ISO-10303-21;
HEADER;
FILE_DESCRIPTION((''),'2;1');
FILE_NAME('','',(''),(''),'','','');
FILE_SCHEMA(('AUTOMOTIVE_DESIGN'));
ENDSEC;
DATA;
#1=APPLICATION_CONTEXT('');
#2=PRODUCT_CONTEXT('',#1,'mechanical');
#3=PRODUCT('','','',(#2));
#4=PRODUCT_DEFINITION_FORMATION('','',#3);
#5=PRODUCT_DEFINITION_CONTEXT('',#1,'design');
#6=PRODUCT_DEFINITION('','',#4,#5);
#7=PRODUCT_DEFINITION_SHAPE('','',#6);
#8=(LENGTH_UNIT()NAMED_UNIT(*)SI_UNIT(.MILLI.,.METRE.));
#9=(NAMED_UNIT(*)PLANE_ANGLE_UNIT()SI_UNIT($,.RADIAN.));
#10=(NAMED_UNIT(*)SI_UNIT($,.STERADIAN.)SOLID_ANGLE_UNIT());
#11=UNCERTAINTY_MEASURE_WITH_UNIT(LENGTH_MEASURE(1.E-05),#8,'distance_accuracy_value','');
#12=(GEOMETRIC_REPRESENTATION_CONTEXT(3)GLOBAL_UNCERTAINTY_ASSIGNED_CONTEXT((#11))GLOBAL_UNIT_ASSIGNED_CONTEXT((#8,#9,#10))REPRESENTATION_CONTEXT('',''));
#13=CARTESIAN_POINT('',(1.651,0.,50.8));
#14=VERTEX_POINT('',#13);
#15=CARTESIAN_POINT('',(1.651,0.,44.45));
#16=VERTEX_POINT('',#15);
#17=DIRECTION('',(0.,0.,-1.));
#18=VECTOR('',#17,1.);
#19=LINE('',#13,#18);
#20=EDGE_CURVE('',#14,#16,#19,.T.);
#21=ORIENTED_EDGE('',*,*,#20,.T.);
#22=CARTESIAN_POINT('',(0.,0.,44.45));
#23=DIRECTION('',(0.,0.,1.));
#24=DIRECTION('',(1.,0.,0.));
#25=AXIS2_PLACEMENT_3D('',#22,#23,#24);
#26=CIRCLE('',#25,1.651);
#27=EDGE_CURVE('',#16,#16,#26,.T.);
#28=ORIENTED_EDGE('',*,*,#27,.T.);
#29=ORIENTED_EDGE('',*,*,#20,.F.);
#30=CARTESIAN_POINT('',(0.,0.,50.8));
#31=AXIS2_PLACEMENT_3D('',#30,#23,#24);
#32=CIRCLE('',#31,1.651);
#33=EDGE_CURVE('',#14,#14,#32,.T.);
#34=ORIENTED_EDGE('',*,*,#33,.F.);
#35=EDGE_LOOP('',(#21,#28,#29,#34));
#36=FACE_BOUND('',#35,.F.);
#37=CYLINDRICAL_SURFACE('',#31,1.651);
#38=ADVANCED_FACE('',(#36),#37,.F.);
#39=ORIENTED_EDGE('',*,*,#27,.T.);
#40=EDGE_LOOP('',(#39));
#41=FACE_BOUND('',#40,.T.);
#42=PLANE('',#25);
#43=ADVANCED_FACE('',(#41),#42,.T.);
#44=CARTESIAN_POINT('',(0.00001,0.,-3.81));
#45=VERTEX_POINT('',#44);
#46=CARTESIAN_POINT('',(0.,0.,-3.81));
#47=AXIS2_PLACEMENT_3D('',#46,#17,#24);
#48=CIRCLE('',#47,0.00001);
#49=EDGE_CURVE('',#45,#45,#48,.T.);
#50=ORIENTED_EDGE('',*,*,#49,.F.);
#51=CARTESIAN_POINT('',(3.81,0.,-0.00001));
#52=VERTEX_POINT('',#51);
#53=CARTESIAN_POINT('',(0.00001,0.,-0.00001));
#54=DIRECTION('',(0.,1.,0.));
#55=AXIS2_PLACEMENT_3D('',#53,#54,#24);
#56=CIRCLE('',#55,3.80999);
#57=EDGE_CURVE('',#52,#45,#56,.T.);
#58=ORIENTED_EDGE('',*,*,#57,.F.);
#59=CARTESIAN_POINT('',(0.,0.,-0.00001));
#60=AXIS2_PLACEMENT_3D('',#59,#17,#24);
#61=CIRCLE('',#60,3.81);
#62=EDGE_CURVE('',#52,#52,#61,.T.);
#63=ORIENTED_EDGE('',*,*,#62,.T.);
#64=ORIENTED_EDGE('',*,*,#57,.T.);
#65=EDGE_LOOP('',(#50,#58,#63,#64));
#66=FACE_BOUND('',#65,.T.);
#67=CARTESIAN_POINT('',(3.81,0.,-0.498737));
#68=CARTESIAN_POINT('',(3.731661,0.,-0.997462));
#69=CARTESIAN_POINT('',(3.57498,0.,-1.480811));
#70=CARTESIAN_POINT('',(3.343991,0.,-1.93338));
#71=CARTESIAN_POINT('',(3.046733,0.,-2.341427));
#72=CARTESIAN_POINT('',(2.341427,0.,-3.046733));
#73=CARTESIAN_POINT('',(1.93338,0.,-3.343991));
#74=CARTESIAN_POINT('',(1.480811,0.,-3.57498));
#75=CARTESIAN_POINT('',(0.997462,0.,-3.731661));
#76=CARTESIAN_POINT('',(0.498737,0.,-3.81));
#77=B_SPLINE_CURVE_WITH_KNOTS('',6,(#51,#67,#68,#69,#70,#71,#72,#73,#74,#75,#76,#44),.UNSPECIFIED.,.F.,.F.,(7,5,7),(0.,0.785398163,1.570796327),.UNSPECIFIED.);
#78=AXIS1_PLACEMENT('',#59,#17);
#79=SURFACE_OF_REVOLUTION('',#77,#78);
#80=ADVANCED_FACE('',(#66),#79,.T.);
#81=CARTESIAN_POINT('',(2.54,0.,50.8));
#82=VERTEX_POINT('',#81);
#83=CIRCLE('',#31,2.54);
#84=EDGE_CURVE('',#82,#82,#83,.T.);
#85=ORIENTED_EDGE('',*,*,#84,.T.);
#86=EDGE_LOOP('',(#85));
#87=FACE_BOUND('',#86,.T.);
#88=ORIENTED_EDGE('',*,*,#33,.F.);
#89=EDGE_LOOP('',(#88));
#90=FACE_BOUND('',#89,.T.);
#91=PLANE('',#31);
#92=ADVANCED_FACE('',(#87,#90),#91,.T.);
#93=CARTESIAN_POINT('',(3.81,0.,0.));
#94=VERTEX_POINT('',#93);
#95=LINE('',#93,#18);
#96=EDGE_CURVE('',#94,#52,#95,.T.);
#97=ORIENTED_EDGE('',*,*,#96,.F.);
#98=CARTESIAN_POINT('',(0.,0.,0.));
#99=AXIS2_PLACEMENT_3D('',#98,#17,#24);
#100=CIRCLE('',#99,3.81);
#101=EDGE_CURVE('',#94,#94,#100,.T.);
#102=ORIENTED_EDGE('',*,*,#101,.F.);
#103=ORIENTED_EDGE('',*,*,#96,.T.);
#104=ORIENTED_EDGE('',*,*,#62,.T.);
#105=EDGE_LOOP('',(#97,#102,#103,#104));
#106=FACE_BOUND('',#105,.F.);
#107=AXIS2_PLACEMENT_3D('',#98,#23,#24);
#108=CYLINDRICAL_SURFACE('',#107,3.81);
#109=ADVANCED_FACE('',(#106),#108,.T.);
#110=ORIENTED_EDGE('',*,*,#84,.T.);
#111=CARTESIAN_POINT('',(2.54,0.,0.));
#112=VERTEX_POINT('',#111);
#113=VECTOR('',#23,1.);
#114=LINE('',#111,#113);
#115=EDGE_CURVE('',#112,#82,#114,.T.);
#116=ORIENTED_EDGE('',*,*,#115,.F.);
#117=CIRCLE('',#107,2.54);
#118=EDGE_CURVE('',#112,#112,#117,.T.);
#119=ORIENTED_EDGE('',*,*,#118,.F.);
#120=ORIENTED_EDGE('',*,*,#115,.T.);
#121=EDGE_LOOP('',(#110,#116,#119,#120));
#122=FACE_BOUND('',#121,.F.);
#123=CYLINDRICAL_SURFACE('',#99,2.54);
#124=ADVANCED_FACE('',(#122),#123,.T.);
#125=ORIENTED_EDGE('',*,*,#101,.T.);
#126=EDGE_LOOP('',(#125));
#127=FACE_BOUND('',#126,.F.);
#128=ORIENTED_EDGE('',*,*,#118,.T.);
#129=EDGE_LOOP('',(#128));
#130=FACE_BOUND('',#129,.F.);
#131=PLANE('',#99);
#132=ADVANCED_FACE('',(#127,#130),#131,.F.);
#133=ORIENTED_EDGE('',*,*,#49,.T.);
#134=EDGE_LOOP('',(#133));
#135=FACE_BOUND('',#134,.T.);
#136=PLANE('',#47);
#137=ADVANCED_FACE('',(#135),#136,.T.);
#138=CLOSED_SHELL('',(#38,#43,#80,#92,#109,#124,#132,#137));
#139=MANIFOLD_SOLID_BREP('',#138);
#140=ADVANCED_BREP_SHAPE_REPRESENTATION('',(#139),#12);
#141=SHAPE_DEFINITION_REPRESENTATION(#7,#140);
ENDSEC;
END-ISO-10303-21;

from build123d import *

# Parameters (mm, degrees)
F0_R     = 2.54
F1_DEPTH = 50.8
F3_R     = 1.651
F4_DEPTH = 6.35
F5_R     = 3.81
F6_DEPTH = 3.81
F7_R     = 3.80999


# Not quite as in the source:
# - a fillet or chamfer is up to 0.001 mm smaller than in the source, because OpenCascade refuses the exact size


with BuildPart() as f1:
    # F0 (on Top) → F1 (new body)
    with BuildSketch(Plane.XY):
        Circle(F0_R)
    extrude(amount=F1_DEPTH)

    # F3 (on face) → F4 (cut)
    with BuildSketch(Plane.XY.offset(50.8)):
        Circle(F3_R)
    extrude(amount=-F4_DEPTH, mode=Mode.SUBTRACT)

    # F5 (on face) → F6 (join)
    with BuildSketch(Plane(origin=(0, 0, 0), x_dir=(1, 0, 0), z_dir=(0, 0, -1))):
        Circle(F5_R)
    extrude(amount=F6_DEPTH)

    # F7 (radius 3.81 in the source; OpenCascade refuses exactly that, so slightly less here)
    f7_edges = [f1.edges().sort_by_distance(p)[0] for p in [
        (-3.81, 0, -3.81),
    ]]
    fillet(f7_edges, radius=F7_R)


solid = f1.part
